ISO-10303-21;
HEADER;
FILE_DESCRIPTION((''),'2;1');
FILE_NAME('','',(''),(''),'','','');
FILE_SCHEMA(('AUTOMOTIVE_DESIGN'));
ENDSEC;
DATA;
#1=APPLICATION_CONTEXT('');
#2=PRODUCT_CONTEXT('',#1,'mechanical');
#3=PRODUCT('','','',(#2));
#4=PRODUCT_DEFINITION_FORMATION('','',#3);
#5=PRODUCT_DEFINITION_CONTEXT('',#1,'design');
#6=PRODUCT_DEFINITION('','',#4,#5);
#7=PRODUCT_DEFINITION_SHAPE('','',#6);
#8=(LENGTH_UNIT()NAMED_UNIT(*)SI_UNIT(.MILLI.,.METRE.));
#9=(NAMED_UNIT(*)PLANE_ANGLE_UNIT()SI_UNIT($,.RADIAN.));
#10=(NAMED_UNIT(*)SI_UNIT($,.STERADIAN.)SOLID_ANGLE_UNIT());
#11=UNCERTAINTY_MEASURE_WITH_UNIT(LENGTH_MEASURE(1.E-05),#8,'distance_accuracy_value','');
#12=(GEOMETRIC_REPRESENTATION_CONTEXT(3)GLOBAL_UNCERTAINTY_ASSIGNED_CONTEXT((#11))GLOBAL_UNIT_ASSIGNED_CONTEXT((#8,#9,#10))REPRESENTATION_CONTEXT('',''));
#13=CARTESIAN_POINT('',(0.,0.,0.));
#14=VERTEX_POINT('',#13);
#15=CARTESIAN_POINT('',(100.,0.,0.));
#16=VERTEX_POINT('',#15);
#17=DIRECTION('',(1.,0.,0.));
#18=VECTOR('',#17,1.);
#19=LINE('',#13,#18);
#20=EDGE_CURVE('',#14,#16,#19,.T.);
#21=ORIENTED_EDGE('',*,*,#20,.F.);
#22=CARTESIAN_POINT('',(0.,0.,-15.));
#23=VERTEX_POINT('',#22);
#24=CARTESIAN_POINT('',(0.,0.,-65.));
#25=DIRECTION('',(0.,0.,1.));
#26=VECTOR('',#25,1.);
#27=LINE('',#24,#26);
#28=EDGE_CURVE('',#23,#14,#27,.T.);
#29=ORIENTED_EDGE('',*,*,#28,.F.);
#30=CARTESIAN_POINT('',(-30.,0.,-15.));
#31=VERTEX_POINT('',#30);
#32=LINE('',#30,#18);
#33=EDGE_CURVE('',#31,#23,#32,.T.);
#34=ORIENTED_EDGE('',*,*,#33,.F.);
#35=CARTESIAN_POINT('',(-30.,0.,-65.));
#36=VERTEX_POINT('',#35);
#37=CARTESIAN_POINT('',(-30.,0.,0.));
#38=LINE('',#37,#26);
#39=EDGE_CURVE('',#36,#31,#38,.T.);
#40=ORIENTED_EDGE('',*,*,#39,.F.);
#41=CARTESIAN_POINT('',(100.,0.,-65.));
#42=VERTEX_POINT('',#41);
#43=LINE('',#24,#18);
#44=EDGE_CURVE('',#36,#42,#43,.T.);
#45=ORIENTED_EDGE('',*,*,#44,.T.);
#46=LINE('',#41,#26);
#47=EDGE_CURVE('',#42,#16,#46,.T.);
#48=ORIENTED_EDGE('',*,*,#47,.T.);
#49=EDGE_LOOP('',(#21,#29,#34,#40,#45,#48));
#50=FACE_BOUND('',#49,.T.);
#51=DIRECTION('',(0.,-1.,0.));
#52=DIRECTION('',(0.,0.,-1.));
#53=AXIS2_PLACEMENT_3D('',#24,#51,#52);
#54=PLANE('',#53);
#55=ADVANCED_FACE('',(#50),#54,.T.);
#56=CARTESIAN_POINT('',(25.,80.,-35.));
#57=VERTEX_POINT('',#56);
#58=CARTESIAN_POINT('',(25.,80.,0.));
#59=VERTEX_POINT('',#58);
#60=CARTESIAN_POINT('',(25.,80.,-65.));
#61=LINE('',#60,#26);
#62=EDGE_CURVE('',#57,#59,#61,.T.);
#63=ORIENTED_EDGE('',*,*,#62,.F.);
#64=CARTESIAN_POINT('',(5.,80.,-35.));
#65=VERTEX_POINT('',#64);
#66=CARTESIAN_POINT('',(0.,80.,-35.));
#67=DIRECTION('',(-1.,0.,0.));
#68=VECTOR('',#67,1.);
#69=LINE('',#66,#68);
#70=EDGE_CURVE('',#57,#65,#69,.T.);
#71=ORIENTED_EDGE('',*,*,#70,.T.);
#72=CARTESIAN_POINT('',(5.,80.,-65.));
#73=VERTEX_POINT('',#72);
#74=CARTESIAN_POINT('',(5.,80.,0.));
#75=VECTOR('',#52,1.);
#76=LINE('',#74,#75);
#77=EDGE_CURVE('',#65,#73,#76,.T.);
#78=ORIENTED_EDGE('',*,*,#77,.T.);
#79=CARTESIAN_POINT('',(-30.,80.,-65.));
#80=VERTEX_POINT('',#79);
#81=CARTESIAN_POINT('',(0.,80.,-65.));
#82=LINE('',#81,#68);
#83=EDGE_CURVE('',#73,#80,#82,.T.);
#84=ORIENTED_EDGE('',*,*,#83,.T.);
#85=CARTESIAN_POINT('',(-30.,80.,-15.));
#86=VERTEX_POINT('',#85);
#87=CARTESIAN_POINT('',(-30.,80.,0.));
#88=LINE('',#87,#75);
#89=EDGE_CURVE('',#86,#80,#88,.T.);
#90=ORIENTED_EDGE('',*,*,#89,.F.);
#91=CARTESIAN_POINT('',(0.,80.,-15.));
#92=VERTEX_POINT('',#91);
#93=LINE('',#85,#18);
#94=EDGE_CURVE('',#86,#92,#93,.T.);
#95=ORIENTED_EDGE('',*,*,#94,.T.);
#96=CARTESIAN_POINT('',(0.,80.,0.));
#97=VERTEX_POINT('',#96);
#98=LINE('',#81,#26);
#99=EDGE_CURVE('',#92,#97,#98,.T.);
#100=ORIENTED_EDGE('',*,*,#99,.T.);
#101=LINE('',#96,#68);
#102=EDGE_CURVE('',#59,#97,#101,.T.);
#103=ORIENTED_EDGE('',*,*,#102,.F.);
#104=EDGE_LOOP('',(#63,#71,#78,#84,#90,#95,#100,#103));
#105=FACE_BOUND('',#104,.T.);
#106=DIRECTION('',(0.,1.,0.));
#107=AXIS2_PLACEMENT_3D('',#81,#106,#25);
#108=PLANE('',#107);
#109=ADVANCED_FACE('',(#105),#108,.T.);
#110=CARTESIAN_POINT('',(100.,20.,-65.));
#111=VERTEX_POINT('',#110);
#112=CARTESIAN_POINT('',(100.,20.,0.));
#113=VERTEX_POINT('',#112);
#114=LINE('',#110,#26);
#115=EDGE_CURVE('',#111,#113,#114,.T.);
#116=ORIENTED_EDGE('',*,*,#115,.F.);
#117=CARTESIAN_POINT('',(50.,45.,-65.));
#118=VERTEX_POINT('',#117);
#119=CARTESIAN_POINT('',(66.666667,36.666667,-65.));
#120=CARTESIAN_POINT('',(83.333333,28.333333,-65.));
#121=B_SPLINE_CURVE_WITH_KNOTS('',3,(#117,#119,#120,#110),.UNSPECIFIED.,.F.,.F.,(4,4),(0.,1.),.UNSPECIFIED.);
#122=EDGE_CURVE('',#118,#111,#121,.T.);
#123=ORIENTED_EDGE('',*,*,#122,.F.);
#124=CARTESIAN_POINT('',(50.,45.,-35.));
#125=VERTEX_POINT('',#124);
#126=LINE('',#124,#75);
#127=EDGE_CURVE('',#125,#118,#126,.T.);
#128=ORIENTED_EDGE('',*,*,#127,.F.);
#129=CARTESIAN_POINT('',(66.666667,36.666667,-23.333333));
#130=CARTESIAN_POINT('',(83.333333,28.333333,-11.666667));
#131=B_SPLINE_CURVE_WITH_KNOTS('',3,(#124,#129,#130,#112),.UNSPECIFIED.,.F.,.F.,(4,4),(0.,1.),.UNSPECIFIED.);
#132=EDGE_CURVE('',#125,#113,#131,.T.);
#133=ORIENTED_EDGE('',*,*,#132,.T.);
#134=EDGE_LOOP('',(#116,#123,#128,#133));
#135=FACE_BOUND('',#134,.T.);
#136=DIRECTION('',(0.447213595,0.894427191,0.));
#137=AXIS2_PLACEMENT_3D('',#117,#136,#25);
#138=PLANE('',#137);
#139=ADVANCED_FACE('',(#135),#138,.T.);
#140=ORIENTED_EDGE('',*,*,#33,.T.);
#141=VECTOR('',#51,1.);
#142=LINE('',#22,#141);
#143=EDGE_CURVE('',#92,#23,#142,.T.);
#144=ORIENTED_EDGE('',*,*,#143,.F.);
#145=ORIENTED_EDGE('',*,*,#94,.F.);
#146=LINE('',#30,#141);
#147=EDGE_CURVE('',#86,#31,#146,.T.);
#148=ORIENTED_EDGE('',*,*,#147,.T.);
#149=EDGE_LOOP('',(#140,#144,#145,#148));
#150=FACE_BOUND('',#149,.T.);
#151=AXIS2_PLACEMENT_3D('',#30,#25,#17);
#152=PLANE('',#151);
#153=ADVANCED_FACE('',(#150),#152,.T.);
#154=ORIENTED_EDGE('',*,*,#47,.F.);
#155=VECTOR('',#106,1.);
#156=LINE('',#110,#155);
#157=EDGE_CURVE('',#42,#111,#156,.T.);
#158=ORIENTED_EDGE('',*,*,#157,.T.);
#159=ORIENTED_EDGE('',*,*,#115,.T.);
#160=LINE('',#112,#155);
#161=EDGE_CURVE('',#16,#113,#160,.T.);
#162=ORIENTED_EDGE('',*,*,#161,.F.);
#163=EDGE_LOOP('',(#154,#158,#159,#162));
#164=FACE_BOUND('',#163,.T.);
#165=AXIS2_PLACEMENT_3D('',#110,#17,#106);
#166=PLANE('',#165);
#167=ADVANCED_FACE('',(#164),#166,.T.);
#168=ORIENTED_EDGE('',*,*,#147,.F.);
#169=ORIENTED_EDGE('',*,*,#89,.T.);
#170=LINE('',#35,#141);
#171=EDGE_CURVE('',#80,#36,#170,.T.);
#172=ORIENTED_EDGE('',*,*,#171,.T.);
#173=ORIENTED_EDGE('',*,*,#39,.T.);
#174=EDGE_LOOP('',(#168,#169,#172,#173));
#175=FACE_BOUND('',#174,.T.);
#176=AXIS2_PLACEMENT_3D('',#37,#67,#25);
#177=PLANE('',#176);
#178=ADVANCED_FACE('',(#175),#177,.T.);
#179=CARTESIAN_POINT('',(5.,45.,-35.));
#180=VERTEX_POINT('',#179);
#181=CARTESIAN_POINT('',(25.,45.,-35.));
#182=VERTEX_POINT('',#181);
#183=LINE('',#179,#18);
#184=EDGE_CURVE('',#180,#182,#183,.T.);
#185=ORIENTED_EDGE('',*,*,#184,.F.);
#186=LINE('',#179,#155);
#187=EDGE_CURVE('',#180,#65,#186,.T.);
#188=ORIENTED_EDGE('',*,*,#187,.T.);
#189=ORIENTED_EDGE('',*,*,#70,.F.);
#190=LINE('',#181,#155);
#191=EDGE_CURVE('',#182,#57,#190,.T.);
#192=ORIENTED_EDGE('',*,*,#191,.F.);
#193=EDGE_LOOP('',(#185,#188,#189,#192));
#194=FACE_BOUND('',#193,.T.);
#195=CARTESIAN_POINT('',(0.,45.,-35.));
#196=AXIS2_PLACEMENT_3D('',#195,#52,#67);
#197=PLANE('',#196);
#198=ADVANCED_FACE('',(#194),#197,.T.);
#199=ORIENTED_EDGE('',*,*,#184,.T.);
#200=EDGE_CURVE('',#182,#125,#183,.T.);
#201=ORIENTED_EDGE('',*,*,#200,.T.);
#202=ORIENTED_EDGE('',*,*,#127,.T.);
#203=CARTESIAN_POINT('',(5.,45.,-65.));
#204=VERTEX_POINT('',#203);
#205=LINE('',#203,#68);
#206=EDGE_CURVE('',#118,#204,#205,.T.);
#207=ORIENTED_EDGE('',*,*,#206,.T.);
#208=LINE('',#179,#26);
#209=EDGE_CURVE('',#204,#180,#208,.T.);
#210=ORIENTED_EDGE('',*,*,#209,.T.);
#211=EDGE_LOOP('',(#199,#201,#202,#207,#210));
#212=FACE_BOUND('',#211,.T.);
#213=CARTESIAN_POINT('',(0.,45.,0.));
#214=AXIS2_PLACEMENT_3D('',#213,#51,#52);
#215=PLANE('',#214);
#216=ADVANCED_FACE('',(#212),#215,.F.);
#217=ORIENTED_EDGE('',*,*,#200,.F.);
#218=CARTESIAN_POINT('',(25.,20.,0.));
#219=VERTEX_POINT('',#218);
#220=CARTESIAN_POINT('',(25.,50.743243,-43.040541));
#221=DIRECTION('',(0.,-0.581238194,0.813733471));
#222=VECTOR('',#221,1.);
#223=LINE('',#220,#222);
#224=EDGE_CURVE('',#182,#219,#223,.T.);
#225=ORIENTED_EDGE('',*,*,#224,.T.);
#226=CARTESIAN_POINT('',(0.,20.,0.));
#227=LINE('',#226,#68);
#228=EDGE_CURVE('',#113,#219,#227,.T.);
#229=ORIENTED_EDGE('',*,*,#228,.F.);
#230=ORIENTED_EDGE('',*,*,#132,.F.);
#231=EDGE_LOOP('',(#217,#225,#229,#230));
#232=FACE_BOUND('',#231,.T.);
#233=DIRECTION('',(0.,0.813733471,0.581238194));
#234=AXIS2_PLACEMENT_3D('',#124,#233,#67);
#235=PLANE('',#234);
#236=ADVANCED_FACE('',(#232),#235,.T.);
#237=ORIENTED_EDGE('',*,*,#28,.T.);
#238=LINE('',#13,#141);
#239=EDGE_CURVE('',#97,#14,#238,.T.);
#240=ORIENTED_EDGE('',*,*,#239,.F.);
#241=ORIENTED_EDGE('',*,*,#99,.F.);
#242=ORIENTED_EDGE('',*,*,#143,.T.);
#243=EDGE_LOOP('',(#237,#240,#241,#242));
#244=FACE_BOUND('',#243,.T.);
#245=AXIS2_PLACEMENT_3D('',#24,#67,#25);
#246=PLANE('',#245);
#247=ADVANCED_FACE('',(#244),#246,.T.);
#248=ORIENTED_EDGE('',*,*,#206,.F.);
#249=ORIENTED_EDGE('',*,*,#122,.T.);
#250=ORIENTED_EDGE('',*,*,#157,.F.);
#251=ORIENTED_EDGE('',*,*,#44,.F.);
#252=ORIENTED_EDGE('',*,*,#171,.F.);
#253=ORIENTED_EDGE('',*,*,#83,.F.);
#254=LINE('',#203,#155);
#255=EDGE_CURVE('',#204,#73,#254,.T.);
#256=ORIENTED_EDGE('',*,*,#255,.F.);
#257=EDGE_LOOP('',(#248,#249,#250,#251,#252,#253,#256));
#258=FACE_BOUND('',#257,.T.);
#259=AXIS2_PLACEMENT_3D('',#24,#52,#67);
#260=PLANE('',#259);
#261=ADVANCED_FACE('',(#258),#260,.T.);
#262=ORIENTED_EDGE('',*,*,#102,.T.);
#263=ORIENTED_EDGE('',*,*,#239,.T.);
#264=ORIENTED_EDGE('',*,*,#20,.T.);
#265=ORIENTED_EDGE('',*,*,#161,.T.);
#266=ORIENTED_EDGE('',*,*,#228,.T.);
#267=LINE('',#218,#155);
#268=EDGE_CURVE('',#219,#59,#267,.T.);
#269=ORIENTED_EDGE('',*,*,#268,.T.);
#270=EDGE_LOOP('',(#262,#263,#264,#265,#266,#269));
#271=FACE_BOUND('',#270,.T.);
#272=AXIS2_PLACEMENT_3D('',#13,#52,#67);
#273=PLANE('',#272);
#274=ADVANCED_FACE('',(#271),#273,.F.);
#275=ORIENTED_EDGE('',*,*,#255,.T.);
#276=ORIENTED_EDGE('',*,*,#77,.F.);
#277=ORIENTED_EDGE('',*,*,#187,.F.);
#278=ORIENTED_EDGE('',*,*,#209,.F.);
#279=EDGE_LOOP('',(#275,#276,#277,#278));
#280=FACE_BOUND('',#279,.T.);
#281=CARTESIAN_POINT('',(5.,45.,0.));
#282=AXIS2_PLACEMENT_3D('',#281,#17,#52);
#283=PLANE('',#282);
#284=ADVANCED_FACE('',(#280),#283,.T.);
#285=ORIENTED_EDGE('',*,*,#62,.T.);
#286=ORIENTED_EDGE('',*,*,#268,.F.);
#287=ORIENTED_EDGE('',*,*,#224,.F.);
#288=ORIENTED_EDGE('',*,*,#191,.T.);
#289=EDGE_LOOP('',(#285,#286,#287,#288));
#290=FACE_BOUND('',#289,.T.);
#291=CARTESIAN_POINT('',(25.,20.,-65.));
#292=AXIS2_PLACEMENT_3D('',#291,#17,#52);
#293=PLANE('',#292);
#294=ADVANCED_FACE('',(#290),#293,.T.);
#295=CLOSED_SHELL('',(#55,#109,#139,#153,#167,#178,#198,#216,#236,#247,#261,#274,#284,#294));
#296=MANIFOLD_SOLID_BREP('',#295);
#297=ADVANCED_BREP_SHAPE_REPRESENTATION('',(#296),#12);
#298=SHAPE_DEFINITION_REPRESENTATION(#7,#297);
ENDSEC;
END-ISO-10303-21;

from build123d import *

# Parameters (mm, degrees)
BOSS_EXTRUDE2_DEPTH = 65
SKETCH4_W           = 20
SKETCH4_H           = 30
CUT_EXTRUDE1_DEPTH  = 35
SKETCH5_W           = 50
SKETCH5_H           = 80
BOSS_EXTRUDE3_DEPTH = 30
SKETCH6_W           = 30
SKETCH6_H           = 25
CUT_EXTRUDE2_DEPTH  = 20
LOFT3_START         = -65
LOFT3_DEPTH         = 65
LOFT3_START_2       = 25
LOFT3_2_DEPTH       = 76


with BuildPart() as part:
    # Sketch3 → Boss-Extrude2 (new body)
    with BuildSketch(Plane.XY):
        Polygon((0, 0), (100, 0), (100, 20), (25, 20), (25, 80), (0, 80), align=None)
    extrude(amount=-BOSS_EXTRUDE2_DEPTH)

    # Sketch4 → Cut-Extrude1 (cut)
    with BuildSketch(Plane(origin=(0, 80, 0), x_dir=(1, 0, 0), z_dir=(0, 1, 0))):
        with Locations((15, 50)):
            Rectangle(SKETCH4_W, SKETCH4_H)
    extrude(amount=-CUT_EXTRUDE1_DEPTH, mode=Mode.SUBTRACT)

    # Sketch5 → Boss-Extrude3 (add)
    with BuildSketch(Plane.ZY):
        with Locations((-40, 40)):
            Rectangle(SKETCH5_W, SKETCH5_H)
    extrude(amount=BOSS_EXTRUDE3_DEPTH)

    # Sketch6 → Cut-Extrude2 (cut)
    with BuildSketch(Plane(origin=(25, 0, 0), x_dir=(0, 0, -1), z_dir=(1, 0, 0))):
        with Locations((50, 32.5)):
            Rectangle(SKETCH6_W, SKETCH6_H)
    extrude(amount=-CUT_EXTRUDE2_DEPTH, mode=Mode.SUBTRACT)

    # Loft3: read off the stored shape, not the designer's step
    # Loft3 outline → Loft3 (add)
    with BuildSketch(Plane.XY.offset(LOFT3_START)):
        Polygon((5, 45), (5, 20), (100, 20), (50, 45), align=None)
    extrude(amount=LOFT3_DEPTH)

    # Loft3 2 outline → Loft3 2 (cut)
    with BuildSketch(Plane.YZ.offset(LOFT3_START_2)):
        Polygon((20, 0), (45, -35), (45, 0), align=None)
    extrude(amount=LOFT3_2_DEPTH, mode=Mode.SUBTRACT)


solid = part.part
